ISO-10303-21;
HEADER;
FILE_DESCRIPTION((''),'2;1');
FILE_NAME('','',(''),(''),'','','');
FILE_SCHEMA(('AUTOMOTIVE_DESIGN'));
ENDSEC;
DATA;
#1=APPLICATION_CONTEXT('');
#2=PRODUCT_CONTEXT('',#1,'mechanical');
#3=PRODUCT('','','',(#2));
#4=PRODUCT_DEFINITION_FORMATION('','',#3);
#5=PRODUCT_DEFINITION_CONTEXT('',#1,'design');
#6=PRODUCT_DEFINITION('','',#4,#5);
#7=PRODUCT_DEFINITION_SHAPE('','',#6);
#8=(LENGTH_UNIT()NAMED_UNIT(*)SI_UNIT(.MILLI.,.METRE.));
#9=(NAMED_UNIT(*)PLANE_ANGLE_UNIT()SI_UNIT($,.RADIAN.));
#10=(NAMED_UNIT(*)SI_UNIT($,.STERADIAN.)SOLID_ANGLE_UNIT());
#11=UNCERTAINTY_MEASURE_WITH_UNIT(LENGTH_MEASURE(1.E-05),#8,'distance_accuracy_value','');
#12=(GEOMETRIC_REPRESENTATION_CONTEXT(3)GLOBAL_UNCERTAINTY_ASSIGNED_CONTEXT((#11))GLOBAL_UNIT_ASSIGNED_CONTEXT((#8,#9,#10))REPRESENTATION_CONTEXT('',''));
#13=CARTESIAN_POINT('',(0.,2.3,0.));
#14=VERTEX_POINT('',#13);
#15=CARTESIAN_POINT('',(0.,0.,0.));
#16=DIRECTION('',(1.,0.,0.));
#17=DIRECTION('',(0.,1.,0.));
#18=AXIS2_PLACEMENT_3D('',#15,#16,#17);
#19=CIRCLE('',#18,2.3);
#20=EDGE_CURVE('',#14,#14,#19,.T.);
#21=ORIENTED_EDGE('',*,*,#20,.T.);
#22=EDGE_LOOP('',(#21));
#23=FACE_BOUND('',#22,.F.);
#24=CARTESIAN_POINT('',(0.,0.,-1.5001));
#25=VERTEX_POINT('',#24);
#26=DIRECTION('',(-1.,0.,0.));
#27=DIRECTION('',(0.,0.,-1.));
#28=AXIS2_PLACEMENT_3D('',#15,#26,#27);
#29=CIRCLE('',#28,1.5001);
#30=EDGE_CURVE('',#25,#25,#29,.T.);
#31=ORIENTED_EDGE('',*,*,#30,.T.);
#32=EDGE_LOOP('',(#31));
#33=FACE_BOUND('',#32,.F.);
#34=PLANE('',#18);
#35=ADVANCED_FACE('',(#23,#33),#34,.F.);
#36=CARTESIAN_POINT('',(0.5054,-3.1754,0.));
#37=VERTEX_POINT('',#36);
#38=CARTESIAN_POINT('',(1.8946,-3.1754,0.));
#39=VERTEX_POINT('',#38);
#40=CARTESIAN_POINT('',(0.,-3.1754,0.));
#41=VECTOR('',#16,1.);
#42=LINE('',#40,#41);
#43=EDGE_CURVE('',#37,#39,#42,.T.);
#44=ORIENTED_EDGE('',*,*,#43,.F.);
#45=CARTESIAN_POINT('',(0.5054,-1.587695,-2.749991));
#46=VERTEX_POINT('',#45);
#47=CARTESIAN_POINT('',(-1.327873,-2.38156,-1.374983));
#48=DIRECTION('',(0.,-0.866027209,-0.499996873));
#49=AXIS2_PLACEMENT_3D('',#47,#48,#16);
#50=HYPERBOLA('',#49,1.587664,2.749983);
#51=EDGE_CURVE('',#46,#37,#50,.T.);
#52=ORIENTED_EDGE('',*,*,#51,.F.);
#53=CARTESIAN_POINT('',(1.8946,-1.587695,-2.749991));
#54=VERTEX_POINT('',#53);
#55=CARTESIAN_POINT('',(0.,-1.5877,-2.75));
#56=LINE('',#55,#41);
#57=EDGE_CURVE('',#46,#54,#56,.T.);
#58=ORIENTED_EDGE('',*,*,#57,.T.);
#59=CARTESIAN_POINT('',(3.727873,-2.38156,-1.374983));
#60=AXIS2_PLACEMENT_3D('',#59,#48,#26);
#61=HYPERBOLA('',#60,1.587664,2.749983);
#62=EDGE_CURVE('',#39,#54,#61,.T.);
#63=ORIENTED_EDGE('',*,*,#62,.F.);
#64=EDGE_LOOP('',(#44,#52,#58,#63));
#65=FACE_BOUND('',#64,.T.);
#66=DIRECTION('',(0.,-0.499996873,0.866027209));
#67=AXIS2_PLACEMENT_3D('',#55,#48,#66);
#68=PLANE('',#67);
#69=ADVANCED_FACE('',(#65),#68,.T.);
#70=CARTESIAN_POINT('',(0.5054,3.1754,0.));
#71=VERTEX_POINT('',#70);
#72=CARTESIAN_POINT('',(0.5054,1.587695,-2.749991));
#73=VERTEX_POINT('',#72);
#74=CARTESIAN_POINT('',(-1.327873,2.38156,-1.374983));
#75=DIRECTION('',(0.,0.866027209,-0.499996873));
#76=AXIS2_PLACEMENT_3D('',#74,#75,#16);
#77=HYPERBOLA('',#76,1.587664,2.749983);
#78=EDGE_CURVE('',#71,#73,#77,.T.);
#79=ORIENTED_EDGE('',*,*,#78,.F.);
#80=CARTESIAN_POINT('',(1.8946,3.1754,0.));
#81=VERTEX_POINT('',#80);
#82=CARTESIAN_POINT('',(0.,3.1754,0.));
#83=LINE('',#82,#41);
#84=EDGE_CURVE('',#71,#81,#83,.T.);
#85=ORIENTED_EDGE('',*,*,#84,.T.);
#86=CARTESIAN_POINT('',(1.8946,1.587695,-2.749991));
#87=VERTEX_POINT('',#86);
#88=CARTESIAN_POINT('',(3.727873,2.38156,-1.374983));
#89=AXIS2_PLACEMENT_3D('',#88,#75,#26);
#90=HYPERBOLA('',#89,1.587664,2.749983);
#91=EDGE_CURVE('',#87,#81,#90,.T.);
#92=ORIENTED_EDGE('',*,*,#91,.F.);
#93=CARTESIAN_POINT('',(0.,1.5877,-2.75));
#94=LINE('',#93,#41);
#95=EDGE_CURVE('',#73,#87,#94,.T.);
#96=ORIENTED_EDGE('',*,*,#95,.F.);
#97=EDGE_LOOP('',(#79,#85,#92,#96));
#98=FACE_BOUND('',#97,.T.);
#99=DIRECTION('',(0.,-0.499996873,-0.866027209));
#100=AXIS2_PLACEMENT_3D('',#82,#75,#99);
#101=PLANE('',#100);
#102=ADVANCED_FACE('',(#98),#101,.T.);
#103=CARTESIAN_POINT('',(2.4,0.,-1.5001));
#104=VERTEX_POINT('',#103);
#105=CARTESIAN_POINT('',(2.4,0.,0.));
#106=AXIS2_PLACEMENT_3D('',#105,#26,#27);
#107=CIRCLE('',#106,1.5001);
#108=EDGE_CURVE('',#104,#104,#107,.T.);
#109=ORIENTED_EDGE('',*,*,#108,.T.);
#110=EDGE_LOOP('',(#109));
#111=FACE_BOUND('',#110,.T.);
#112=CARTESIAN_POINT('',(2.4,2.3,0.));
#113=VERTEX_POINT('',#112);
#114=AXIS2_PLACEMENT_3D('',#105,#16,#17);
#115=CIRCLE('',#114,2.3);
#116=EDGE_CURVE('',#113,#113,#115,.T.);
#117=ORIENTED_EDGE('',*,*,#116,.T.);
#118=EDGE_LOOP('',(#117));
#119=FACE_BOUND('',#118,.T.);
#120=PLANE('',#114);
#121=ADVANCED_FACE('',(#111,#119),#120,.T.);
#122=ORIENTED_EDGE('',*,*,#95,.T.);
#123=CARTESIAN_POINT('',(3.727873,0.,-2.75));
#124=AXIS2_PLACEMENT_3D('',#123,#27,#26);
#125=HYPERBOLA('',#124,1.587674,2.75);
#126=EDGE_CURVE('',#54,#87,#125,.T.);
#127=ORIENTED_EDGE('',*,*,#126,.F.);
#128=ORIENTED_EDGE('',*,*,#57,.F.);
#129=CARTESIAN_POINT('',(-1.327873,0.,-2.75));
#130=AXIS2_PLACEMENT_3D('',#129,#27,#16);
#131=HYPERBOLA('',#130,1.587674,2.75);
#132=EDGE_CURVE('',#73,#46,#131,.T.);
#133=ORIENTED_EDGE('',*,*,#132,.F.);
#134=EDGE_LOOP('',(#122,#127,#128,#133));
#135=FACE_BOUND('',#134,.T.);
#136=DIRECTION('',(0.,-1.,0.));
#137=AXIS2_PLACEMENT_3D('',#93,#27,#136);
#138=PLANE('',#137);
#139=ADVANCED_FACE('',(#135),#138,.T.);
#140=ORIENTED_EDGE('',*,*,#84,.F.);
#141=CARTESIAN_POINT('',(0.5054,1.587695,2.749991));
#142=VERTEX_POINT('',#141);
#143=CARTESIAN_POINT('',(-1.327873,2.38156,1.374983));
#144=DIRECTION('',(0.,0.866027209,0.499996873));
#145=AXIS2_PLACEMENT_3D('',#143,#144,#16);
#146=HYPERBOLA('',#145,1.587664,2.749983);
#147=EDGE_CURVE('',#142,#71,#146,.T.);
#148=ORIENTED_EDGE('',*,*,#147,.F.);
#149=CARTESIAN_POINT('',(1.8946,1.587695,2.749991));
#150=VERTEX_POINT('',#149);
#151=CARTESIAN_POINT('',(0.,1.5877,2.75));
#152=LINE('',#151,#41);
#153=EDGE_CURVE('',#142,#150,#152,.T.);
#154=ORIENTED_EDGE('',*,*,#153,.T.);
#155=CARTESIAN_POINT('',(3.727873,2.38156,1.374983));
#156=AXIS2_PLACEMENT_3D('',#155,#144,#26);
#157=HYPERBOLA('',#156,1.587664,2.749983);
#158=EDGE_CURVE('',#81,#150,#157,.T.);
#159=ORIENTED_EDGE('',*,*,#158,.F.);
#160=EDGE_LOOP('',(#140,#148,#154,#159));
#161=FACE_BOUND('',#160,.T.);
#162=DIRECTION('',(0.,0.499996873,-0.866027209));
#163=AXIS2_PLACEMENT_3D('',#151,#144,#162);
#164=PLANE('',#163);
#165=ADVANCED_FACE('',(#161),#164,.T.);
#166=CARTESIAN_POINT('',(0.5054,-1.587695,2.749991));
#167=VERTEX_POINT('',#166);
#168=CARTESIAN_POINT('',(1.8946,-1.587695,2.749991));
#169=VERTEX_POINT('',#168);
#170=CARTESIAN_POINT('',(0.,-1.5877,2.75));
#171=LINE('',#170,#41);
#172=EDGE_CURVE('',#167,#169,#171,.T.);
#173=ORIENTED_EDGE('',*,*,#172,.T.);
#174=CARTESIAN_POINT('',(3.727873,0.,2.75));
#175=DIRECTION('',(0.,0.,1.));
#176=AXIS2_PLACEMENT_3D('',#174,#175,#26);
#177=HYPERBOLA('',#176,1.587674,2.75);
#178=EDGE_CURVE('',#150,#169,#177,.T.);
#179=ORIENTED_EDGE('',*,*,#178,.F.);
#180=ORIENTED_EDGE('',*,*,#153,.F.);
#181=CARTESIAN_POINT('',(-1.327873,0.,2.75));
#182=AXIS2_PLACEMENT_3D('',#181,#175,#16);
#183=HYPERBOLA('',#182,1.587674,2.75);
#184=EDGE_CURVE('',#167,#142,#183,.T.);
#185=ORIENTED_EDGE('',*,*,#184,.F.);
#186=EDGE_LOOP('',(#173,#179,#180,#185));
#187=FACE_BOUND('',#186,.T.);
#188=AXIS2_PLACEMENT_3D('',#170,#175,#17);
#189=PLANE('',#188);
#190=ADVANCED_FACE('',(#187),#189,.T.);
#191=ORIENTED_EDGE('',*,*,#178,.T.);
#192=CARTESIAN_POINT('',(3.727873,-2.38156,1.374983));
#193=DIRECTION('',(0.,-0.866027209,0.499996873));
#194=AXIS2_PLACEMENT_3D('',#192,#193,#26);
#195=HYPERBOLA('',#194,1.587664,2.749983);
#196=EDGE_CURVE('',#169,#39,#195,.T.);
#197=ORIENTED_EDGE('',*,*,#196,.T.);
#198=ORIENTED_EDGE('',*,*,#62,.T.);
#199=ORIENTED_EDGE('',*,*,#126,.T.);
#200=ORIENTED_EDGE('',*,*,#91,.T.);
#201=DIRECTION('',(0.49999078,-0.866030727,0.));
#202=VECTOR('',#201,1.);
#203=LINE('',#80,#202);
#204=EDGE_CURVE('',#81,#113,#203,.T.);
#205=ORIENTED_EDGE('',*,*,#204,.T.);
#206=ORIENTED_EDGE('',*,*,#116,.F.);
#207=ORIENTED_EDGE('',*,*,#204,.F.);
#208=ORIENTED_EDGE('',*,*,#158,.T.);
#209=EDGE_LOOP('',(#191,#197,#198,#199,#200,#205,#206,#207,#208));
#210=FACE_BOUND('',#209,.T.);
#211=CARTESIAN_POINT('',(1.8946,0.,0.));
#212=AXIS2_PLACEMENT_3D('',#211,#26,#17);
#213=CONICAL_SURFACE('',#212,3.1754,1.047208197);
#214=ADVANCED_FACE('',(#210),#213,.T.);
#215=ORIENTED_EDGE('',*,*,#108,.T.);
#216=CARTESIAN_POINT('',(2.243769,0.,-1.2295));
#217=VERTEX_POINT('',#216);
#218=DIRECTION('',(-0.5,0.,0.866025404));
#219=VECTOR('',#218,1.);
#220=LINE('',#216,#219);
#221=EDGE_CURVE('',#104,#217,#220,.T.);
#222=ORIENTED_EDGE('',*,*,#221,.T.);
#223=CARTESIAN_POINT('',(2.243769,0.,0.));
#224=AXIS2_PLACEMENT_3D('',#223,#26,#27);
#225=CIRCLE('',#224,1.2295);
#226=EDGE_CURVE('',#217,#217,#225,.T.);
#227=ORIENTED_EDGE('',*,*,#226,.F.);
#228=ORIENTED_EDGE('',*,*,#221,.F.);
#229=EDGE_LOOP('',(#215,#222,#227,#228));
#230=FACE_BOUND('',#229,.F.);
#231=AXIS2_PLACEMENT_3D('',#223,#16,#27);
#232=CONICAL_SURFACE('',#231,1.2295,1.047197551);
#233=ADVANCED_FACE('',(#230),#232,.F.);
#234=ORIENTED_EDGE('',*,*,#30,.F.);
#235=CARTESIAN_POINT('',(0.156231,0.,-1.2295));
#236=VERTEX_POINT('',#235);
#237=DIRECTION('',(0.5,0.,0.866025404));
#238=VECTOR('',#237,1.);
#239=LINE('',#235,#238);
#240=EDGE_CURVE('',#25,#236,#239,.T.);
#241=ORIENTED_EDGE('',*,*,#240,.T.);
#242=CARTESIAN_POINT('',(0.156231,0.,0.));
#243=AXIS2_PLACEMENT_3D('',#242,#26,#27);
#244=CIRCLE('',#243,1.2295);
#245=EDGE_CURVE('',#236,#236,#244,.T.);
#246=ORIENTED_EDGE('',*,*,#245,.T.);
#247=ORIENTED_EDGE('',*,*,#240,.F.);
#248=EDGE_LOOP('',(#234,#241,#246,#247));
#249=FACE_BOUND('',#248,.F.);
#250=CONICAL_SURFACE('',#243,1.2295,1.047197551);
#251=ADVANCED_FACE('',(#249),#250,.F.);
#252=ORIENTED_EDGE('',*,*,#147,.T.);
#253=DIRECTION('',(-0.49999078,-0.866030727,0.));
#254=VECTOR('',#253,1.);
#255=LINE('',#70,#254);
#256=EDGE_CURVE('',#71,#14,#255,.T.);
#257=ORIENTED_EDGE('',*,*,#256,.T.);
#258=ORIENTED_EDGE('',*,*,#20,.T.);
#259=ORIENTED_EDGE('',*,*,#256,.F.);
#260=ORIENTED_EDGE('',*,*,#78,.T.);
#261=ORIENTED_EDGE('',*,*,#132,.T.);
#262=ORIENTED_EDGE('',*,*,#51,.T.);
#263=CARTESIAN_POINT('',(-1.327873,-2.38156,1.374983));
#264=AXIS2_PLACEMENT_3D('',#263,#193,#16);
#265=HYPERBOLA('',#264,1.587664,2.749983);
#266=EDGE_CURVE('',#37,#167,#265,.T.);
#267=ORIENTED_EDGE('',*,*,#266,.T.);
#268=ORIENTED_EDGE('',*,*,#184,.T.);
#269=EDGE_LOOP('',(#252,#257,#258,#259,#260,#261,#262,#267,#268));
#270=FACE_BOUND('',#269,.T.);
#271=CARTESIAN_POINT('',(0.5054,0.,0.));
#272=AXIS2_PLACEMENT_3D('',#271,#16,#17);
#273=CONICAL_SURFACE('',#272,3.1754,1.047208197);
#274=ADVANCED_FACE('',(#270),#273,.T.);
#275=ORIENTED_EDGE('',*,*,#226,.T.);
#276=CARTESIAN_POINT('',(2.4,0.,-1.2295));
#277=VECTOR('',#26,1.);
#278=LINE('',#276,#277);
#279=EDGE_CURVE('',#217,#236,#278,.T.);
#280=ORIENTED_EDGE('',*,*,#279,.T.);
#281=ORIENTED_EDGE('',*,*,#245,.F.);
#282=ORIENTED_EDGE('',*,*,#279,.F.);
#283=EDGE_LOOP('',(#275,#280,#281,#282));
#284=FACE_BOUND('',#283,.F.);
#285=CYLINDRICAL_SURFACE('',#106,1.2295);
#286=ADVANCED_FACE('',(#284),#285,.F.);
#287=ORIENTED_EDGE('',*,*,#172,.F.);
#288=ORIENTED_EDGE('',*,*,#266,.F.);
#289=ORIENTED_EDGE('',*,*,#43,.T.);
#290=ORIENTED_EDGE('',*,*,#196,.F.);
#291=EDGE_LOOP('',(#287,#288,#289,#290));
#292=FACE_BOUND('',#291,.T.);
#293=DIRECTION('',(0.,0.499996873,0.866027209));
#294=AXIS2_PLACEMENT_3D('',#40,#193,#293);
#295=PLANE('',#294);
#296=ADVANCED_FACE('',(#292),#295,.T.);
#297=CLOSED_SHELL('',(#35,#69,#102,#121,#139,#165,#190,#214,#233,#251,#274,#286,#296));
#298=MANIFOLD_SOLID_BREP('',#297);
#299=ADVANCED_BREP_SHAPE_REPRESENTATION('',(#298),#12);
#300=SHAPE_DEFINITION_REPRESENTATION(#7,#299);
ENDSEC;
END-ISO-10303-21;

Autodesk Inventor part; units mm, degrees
ref_plane "YZ Plane" through (0, 0, 0) normal (1, 0, 0) x (0, 1, 0)
ref_plane "XZ Plane" through (0, 0, 0) normal (0, 1, 0) x (-1, 0, 0)
sketch "Sketch1" plane through (0, 0, 0) normal (1, 0, 0) x (0, 1, 0)
  line L0 (-3.1754, 0) -> (-1.5877, 2.75)
  line L1 (-1.5877, 2.75) -> (1.5877, 2.75)
  line L2 (1.5877, 2.75) -> (3.1754, 0)
  line L3 (3.1754, 0) -> (1.5877, -2.75)
  line L4 (1.5877, -2.75) -> (-1.5877, -2.75)
  line L5 (-1.5877, -2.75) -> (-3.1754, 0)
  point P0 (0, 0)
  point P1 (0, 0)
  dimension "d0" = 6.3509
extrude "Body" add sketch "Sketch1" along normal blind 2.4
sketch "Sketch2" plane through (0, 0, 0) normal (0, 0, 1) x (1, 0, 0)
  line L0 (0, 1.5877) -> (0, 3.1754) projected
  line L1 (0, 3.1754) -> (2.4, 3.1754) projected
  line L2 (2.4, 1.5877) -> (2.4, 3.1754) projected
  line L3 (-0.48, 0) -> (2.88, 0) projected
  line L4 (0.5054, 3.1754) -> (0, 2.3)
  line L5 (1.8946, 3.1754) -> (2.4, 2.3)
  dimension "d3" = 30
  dimension "d4" = 30
  dimension "d5" = 4.6
  dimension "d6" = 4.6
revolve "Chamfer1" cut sketch "Sketch2" angle 360 about axis through (-10, 0, 0) along (1, 0, 0)
sketch "Sketch3" plane through (2.4, 0, 0) normal (1, 0, 0) x (0, 0, -1)
  arc A0 (-0.625, -1.0825) -> (0.625, -1.0825) centre (0, 0) ccw projected
hole "Thread" at (2.4, 0, 0) direction (-1, 0, 0) diameter 2.459 end through all thread size "M3x0.5" class "6H" standard "ISO Metric profile"
chamfer "Chamfer2" distance 0.2706 angle 30 1 edges at (2.4, 0, 1.2295) measured on face at (2.4, 1.9179, -0.2329)
chamfer "Chamfer3" distance 0.2706 angle 30 1 edges at (0, 0, 1.2295) measured on face at (0, 1.9179, -0.2329)
ref_plane "Work Plane1" through (-6.3375, 0, 0) normal (0, -0.8660254, -0.5) x (1, 0, 0)
equation "\"d0\" = 1.1547 * SW"
equation "\"d1\" = KOH"
equation "\"d8\" = -0.5 * GD1 + 0.5 * NND"
equation "\"d40\" = -0.5 * GD1 + 0.5 * NND"
equation "\"d10\" = -0.5 * GD1 + 0.5 * NND"
equation "\"d41\" = -0.5 * GD1 + 0.5 * NND"
equation "\"d3\" = ANG1"
equation "\"d4\" = ANG2"
equation "\"d5\" = SW0"
equation "\"d6\" = SW01"
equation "\"ANG1\" = 30deg"
equation "\"ANG2\" = 30deg"
equation "\"NND\" = 3"
equation "\"KOH\" = 2.4"
equation "\"SW\" = 5.5"
equation "\"SW0\" = 4.6"
equation "\"SW01\" = SW0"
equation "\"GUL\" = 0.541266 * PTC"
equation "\"THREADDIA\" = 3"
equation "\"TOA\" = 30deg"
equation "\"PTC\" = 0.5"
equation "\"E0\" = 1.155 * SW"
equation "\"GAL\" = 0.541266 * PTC"
equation "\"GD1\" = 2.458734"
properties part number "ISO 4032 - M3" material "Stainless Steel, 440C"
